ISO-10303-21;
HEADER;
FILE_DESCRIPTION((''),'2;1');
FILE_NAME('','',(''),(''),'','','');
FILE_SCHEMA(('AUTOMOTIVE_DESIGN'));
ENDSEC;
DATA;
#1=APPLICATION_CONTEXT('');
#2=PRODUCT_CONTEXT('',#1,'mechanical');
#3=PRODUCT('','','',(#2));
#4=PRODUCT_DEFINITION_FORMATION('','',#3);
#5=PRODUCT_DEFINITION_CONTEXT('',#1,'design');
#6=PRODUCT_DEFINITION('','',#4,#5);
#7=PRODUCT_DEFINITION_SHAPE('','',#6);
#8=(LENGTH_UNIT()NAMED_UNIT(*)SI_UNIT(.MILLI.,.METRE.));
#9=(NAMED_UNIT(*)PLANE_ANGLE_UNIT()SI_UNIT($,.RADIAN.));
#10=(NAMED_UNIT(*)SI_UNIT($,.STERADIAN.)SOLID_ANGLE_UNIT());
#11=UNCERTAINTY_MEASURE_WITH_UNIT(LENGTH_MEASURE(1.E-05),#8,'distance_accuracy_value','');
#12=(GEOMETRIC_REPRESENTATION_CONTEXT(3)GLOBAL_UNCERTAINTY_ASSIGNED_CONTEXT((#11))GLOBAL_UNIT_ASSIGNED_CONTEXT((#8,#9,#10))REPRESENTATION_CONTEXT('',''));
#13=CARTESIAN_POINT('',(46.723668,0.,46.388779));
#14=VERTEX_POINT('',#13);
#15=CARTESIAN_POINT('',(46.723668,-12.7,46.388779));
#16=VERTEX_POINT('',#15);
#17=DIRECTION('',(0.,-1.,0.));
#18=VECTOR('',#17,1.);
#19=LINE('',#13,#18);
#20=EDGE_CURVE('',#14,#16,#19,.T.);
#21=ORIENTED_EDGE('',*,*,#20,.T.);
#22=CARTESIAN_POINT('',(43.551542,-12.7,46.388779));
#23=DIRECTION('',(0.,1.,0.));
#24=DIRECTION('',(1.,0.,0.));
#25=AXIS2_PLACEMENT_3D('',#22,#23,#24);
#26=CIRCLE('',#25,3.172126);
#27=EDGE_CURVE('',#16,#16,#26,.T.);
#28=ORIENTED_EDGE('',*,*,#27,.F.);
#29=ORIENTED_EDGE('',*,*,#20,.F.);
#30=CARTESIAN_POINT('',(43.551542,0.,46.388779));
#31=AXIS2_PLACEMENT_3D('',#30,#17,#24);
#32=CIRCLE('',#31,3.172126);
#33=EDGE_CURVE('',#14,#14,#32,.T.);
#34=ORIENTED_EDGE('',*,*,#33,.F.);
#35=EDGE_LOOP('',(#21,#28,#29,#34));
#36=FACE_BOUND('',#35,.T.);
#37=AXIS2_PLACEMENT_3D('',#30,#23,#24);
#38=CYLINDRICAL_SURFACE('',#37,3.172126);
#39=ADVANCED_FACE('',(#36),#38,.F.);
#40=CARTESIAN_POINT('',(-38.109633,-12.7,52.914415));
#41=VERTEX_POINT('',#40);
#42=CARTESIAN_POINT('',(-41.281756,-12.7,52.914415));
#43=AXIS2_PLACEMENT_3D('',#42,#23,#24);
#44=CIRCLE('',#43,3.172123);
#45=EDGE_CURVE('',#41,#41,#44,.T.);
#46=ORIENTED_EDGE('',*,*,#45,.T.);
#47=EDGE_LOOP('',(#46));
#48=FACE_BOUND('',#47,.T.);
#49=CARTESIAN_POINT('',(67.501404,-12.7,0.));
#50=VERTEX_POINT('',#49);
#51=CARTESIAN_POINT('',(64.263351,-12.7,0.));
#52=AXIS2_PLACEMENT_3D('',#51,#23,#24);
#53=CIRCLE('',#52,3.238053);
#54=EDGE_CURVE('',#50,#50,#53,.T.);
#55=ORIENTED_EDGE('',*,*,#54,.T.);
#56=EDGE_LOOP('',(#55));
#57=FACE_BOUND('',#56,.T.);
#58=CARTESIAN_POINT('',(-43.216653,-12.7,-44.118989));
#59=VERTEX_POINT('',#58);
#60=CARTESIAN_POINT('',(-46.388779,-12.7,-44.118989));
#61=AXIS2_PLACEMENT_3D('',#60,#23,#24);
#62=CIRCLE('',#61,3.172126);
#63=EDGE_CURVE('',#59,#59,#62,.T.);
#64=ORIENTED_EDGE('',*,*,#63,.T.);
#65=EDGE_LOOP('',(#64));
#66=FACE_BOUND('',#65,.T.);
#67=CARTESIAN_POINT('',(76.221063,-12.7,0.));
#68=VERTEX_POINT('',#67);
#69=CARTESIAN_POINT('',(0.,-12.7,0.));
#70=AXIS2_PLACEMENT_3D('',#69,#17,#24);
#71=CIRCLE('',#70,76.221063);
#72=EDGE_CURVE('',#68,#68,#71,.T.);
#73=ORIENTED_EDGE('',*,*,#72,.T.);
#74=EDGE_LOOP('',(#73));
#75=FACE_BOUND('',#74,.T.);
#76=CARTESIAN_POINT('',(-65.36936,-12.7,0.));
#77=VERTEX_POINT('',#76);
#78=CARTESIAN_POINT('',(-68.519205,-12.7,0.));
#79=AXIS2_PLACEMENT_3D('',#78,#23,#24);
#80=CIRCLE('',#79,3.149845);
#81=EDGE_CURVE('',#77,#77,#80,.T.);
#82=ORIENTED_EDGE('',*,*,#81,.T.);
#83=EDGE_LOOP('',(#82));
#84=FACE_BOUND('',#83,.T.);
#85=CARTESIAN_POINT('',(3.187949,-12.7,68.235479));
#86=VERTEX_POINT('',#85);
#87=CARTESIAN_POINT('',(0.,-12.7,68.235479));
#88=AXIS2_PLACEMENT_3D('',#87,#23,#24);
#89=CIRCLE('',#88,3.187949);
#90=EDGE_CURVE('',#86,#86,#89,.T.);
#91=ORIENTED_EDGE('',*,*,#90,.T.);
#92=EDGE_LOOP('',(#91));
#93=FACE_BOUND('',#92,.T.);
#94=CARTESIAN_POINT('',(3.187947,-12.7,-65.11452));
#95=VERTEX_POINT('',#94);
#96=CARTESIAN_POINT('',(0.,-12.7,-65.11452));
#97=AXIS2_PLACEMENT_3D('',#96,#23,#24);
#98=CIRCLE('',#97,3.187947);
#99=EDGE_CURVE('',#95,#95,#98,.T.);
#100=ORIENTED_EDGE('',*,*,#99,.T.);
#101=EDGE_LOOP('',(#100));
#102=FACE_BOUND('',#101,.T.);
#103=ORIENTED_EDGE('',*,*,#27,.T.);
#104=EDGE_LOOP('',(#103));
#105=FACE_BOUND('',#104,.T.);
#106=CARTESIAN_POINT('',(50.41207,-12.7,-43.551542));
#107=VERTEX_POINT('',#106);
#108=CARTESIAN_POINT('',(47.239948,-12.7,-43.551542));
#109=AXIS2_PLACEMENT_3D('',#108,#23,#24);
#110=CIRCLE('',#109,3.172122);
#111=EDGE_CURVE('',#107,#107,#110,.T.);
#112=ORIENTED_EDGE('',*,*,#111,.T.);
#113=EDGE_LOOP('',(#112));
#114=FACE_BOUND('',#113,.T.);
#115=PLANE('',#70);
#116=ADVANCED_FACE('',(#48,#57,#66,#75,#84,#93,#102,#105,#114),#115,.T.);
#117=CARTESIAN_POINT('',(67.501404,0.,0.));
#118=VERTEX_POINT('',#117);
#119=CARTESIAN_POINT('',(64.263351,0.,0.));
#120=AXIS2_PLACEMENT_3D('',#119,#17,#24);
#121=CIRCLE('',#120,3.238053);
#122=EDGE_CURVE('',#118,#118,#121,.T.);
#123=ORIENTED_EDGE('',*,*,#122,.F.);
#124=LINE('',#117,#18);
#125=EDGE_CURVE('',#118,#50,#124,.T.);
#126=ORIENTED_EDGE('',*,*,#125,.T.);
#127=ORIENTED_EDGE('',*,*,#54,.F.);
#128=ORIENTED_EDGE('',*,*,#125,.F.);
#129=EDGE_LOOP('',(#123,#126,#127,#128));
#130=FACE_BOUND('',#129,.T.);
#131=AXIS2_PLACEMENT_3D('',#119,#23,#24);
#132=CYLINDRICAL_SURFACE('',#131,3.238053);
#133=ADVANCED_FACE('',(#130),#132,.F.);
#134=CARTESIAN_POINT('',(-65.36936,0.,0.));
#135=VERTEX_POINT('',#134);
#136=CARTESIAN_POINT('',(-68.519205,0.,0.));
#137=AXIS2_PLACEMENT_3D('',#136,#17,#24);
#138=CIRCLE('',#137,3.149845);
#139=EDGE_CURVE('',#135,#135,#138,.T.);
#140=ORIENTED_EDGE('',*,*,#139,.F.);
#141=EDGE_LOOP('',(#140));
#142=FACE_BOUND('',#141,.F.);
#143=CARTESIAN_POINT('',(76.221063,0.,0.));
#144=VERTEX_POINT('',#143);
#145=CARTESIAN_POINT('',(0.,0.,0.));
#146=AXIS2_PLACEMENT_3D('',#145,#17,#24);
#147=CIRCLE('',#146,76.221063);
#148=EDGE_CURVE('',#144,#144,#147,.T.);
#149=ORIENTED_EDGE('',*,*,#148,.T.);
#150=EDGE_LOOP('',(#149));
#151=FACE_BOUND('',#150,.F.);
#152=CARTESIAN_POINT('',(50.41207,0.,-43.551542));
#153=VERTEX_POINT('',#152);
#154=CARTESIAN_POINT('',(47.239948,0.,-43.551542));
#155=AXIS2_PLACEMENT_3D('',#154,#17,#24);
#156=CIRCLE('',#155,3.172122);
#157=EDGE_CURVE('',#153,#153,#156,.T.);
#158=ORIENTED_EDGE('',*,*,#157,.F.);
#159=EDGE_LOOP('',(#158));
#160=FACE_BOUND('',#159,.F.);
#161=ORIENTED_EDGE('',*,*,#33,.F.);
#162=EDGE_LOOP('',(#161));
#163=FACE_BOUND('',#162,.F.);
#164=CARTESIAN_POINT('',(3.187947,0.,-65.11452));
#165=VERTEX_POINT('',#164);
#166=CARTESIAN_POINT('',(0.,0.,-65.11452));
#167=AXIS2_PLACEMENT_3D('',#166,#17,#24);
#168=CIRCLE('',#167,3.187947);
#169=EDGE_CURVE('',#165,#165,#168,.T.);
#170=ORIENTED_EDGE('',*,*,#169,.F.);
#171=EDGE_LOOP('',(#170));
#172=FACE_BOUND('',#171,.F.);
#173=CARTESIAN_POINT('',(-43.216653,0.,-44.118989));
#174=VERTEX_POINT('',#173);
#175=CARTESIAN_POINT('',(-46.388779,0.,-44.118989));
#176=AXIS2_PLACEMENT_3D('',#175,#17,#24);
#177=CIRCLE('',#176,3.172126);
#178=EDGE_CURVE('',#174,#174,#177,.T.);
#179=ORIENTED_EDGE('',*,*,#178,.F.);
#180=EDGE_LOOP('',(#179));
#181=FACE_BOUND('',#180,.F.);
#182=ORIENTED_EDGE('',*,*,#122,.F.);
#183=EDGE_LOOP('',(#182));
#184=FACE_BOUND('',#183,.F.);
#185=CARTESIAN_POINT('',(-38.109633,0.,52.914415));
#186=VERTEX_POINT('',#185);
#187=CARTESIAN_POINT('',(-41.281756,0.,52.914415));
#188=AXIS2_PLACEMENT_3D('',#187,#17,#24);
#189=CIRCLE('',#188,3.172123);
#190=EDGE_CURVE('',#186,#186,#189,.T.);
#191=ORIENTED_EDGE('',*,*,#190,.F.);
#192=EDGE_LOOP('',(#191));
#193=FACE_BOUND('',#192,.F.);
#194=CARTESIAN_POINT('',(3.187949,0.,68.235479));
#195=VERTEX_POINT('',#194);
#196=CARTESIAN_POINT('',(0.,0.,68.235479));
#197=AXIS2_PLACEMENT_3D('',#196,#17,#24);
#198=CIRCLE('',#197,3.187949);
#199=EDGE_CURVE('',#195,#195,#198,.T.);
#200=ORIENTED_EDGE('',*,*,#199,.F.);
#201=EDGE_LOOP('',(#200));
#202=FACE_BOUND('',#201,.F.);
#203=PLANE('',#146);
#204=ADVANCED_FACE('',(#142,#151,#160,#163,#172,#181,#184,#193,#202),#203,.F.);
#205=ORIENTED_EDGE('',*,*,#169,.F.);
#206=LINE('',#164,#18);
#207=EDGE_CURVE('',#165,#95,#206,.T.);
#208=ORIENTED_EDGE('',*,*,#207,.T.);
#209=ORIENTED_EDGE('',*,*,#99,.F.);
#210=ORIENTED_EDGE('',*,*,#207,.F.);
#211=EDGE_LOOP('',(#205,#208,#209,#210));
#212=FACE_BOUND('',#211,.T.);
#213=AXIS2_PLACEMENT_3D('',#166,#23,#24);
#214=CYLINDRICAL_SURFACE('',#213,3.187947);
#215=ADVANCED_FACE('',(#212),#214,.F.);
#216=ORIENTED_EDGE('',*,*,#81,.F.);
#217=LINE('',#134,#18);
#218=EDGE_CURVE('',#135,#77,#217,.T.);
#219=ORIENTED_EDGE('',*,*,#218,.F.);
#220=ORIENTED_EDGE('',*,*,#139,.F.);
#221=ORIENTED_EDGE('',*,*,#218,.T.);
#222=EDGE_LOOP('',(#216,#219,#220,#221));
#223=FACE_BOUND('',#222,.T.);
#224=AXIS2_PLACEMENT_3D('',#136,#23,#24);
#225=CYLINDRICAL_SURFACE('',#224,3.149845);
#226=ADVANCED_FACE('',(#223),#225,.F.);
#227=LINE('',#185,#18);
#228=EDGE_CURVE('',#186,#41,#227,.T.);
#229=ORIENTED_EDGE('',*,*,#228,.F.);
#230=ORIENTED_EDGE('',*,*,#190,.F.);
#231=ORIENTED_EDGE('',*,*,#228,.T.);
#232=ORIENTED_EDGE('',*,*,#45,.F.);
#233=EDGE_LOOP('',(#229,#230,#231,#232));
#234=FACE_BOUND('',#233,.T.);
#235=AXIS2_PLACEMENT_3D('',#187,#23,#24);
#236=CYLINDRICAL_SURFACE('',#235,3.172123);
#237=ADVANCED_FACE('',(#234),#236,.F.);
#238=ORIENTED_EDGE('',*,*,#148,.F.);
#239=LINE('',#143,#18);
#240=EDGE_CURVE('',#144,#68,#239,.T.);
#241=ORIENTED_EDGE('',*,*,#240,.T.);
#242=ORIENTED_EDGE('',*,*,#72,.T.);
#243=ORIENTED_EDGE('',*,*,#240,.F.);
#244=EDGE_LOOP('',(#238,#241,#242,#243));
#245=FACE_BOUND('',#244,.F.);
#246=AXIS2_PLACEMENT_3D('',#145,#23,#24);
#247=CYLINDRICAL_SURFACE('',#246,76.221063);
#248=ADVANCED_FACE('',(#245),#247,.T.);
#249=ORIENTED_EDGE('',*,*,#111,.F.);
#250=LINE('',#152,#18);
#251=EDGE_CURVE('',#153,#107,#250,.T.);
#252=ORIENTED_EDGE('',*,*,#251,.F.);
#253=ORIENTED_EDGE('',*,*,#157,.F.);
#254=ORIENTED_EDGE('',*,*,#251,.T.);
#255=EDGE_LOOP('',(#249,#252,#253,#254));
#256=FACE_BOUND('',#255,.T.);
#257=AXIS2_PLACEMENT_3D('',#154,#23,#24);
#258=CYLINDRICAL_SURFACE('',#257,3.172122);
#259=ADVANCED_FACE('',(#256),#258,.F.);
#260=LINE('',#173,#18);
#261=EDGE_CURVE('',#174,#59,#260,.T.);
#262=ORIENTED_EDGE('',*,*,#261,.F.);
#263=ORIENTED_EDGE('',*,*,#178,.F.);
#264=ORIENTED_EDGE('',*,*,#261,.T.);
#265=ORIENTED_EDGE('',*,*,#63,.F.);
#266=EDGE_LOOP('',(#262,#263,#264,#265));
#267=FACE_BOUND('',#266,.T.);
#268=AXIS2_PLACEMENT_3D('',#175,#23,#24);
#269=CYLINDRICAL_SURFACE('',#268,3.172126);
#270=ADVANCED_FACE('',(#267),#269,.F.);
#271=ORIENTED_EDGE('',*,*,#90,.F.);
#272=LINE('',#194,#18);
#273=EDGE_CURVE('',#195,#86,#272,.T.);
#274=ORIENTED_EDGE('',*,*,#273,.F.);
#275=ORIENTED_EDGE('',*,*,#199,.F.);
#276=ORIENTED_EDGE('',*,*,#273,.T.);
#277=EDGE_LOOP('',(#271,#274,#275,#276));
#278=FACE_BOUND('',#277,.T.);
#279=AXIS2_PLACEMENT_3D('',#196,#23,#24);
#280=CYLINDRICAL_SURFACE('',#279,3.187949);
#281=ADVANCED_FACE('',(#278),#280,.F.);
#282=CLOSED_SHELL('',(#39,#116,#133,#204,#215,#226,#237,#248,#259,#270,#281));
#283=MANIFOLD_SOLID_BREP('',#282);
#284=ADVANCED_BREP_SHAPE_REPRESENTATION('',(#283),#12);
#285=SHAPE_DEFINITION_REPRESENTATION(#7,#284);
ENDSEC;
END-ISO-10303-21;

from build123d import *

# Parameters (mm, degrees)
F0_R     = 76.2210632732
F1_DEPTH = 12.7
F2_R     = 3.1879491609
F2_R_2   = 3.1879465914
F2_R_3   = 3.2380529084
F2_R_4   = 3.1498446293
F2_R_5   = 3.1721232023
F2_R_6   = 3.1721218695
F2_R_7   = 3.1721255347
F2_R_8   = 3.1721262011
F3_DEPTH = 25.4


# Not quite as in the source:
# - a length typed as a fraction of an inch, garbled in the dataset ("3 / 203.2 mm" for 3/8 in), is restored


with BuildPart() as f1:
    # F0 (on Front) → F1 (new body)
    with BuildSketch(Plane.XZ):
        Circle(F0_R)
    extrude(amount=F1_DEPTH)

    # F2 (on Front) → F3 (cut)
    with BuildSketch(Plane.XZ):
        with Locations((0, 68.2354792953)):
            Circle(F2_R)
        with Locations((0, -65.1145204902)):
            Circle(F2_R_2)
        with Locations((64.2633512616, 0)):
            Circle(F2_R_3)
        with Locations((-68.519204855, 0)):
            Circle(F2_R_4)
        with Locations((-41.2817560136, 52.9144145548)):
            Circle(F2_R_5)
        with Locations((47.2399480641, -43.5515418649)):
            Circle(F2_R_6)
        with Locations((-46.3887788355, -44.118989259)):
            Circle(F2_R_7)
        with Locations((43.5515418649, 46.3887788355)):
            Circle(F2_R_8)
    extrude(amount=F3_DEPTH, mode=Mode.SUBTRACT)


solid = f1.part
